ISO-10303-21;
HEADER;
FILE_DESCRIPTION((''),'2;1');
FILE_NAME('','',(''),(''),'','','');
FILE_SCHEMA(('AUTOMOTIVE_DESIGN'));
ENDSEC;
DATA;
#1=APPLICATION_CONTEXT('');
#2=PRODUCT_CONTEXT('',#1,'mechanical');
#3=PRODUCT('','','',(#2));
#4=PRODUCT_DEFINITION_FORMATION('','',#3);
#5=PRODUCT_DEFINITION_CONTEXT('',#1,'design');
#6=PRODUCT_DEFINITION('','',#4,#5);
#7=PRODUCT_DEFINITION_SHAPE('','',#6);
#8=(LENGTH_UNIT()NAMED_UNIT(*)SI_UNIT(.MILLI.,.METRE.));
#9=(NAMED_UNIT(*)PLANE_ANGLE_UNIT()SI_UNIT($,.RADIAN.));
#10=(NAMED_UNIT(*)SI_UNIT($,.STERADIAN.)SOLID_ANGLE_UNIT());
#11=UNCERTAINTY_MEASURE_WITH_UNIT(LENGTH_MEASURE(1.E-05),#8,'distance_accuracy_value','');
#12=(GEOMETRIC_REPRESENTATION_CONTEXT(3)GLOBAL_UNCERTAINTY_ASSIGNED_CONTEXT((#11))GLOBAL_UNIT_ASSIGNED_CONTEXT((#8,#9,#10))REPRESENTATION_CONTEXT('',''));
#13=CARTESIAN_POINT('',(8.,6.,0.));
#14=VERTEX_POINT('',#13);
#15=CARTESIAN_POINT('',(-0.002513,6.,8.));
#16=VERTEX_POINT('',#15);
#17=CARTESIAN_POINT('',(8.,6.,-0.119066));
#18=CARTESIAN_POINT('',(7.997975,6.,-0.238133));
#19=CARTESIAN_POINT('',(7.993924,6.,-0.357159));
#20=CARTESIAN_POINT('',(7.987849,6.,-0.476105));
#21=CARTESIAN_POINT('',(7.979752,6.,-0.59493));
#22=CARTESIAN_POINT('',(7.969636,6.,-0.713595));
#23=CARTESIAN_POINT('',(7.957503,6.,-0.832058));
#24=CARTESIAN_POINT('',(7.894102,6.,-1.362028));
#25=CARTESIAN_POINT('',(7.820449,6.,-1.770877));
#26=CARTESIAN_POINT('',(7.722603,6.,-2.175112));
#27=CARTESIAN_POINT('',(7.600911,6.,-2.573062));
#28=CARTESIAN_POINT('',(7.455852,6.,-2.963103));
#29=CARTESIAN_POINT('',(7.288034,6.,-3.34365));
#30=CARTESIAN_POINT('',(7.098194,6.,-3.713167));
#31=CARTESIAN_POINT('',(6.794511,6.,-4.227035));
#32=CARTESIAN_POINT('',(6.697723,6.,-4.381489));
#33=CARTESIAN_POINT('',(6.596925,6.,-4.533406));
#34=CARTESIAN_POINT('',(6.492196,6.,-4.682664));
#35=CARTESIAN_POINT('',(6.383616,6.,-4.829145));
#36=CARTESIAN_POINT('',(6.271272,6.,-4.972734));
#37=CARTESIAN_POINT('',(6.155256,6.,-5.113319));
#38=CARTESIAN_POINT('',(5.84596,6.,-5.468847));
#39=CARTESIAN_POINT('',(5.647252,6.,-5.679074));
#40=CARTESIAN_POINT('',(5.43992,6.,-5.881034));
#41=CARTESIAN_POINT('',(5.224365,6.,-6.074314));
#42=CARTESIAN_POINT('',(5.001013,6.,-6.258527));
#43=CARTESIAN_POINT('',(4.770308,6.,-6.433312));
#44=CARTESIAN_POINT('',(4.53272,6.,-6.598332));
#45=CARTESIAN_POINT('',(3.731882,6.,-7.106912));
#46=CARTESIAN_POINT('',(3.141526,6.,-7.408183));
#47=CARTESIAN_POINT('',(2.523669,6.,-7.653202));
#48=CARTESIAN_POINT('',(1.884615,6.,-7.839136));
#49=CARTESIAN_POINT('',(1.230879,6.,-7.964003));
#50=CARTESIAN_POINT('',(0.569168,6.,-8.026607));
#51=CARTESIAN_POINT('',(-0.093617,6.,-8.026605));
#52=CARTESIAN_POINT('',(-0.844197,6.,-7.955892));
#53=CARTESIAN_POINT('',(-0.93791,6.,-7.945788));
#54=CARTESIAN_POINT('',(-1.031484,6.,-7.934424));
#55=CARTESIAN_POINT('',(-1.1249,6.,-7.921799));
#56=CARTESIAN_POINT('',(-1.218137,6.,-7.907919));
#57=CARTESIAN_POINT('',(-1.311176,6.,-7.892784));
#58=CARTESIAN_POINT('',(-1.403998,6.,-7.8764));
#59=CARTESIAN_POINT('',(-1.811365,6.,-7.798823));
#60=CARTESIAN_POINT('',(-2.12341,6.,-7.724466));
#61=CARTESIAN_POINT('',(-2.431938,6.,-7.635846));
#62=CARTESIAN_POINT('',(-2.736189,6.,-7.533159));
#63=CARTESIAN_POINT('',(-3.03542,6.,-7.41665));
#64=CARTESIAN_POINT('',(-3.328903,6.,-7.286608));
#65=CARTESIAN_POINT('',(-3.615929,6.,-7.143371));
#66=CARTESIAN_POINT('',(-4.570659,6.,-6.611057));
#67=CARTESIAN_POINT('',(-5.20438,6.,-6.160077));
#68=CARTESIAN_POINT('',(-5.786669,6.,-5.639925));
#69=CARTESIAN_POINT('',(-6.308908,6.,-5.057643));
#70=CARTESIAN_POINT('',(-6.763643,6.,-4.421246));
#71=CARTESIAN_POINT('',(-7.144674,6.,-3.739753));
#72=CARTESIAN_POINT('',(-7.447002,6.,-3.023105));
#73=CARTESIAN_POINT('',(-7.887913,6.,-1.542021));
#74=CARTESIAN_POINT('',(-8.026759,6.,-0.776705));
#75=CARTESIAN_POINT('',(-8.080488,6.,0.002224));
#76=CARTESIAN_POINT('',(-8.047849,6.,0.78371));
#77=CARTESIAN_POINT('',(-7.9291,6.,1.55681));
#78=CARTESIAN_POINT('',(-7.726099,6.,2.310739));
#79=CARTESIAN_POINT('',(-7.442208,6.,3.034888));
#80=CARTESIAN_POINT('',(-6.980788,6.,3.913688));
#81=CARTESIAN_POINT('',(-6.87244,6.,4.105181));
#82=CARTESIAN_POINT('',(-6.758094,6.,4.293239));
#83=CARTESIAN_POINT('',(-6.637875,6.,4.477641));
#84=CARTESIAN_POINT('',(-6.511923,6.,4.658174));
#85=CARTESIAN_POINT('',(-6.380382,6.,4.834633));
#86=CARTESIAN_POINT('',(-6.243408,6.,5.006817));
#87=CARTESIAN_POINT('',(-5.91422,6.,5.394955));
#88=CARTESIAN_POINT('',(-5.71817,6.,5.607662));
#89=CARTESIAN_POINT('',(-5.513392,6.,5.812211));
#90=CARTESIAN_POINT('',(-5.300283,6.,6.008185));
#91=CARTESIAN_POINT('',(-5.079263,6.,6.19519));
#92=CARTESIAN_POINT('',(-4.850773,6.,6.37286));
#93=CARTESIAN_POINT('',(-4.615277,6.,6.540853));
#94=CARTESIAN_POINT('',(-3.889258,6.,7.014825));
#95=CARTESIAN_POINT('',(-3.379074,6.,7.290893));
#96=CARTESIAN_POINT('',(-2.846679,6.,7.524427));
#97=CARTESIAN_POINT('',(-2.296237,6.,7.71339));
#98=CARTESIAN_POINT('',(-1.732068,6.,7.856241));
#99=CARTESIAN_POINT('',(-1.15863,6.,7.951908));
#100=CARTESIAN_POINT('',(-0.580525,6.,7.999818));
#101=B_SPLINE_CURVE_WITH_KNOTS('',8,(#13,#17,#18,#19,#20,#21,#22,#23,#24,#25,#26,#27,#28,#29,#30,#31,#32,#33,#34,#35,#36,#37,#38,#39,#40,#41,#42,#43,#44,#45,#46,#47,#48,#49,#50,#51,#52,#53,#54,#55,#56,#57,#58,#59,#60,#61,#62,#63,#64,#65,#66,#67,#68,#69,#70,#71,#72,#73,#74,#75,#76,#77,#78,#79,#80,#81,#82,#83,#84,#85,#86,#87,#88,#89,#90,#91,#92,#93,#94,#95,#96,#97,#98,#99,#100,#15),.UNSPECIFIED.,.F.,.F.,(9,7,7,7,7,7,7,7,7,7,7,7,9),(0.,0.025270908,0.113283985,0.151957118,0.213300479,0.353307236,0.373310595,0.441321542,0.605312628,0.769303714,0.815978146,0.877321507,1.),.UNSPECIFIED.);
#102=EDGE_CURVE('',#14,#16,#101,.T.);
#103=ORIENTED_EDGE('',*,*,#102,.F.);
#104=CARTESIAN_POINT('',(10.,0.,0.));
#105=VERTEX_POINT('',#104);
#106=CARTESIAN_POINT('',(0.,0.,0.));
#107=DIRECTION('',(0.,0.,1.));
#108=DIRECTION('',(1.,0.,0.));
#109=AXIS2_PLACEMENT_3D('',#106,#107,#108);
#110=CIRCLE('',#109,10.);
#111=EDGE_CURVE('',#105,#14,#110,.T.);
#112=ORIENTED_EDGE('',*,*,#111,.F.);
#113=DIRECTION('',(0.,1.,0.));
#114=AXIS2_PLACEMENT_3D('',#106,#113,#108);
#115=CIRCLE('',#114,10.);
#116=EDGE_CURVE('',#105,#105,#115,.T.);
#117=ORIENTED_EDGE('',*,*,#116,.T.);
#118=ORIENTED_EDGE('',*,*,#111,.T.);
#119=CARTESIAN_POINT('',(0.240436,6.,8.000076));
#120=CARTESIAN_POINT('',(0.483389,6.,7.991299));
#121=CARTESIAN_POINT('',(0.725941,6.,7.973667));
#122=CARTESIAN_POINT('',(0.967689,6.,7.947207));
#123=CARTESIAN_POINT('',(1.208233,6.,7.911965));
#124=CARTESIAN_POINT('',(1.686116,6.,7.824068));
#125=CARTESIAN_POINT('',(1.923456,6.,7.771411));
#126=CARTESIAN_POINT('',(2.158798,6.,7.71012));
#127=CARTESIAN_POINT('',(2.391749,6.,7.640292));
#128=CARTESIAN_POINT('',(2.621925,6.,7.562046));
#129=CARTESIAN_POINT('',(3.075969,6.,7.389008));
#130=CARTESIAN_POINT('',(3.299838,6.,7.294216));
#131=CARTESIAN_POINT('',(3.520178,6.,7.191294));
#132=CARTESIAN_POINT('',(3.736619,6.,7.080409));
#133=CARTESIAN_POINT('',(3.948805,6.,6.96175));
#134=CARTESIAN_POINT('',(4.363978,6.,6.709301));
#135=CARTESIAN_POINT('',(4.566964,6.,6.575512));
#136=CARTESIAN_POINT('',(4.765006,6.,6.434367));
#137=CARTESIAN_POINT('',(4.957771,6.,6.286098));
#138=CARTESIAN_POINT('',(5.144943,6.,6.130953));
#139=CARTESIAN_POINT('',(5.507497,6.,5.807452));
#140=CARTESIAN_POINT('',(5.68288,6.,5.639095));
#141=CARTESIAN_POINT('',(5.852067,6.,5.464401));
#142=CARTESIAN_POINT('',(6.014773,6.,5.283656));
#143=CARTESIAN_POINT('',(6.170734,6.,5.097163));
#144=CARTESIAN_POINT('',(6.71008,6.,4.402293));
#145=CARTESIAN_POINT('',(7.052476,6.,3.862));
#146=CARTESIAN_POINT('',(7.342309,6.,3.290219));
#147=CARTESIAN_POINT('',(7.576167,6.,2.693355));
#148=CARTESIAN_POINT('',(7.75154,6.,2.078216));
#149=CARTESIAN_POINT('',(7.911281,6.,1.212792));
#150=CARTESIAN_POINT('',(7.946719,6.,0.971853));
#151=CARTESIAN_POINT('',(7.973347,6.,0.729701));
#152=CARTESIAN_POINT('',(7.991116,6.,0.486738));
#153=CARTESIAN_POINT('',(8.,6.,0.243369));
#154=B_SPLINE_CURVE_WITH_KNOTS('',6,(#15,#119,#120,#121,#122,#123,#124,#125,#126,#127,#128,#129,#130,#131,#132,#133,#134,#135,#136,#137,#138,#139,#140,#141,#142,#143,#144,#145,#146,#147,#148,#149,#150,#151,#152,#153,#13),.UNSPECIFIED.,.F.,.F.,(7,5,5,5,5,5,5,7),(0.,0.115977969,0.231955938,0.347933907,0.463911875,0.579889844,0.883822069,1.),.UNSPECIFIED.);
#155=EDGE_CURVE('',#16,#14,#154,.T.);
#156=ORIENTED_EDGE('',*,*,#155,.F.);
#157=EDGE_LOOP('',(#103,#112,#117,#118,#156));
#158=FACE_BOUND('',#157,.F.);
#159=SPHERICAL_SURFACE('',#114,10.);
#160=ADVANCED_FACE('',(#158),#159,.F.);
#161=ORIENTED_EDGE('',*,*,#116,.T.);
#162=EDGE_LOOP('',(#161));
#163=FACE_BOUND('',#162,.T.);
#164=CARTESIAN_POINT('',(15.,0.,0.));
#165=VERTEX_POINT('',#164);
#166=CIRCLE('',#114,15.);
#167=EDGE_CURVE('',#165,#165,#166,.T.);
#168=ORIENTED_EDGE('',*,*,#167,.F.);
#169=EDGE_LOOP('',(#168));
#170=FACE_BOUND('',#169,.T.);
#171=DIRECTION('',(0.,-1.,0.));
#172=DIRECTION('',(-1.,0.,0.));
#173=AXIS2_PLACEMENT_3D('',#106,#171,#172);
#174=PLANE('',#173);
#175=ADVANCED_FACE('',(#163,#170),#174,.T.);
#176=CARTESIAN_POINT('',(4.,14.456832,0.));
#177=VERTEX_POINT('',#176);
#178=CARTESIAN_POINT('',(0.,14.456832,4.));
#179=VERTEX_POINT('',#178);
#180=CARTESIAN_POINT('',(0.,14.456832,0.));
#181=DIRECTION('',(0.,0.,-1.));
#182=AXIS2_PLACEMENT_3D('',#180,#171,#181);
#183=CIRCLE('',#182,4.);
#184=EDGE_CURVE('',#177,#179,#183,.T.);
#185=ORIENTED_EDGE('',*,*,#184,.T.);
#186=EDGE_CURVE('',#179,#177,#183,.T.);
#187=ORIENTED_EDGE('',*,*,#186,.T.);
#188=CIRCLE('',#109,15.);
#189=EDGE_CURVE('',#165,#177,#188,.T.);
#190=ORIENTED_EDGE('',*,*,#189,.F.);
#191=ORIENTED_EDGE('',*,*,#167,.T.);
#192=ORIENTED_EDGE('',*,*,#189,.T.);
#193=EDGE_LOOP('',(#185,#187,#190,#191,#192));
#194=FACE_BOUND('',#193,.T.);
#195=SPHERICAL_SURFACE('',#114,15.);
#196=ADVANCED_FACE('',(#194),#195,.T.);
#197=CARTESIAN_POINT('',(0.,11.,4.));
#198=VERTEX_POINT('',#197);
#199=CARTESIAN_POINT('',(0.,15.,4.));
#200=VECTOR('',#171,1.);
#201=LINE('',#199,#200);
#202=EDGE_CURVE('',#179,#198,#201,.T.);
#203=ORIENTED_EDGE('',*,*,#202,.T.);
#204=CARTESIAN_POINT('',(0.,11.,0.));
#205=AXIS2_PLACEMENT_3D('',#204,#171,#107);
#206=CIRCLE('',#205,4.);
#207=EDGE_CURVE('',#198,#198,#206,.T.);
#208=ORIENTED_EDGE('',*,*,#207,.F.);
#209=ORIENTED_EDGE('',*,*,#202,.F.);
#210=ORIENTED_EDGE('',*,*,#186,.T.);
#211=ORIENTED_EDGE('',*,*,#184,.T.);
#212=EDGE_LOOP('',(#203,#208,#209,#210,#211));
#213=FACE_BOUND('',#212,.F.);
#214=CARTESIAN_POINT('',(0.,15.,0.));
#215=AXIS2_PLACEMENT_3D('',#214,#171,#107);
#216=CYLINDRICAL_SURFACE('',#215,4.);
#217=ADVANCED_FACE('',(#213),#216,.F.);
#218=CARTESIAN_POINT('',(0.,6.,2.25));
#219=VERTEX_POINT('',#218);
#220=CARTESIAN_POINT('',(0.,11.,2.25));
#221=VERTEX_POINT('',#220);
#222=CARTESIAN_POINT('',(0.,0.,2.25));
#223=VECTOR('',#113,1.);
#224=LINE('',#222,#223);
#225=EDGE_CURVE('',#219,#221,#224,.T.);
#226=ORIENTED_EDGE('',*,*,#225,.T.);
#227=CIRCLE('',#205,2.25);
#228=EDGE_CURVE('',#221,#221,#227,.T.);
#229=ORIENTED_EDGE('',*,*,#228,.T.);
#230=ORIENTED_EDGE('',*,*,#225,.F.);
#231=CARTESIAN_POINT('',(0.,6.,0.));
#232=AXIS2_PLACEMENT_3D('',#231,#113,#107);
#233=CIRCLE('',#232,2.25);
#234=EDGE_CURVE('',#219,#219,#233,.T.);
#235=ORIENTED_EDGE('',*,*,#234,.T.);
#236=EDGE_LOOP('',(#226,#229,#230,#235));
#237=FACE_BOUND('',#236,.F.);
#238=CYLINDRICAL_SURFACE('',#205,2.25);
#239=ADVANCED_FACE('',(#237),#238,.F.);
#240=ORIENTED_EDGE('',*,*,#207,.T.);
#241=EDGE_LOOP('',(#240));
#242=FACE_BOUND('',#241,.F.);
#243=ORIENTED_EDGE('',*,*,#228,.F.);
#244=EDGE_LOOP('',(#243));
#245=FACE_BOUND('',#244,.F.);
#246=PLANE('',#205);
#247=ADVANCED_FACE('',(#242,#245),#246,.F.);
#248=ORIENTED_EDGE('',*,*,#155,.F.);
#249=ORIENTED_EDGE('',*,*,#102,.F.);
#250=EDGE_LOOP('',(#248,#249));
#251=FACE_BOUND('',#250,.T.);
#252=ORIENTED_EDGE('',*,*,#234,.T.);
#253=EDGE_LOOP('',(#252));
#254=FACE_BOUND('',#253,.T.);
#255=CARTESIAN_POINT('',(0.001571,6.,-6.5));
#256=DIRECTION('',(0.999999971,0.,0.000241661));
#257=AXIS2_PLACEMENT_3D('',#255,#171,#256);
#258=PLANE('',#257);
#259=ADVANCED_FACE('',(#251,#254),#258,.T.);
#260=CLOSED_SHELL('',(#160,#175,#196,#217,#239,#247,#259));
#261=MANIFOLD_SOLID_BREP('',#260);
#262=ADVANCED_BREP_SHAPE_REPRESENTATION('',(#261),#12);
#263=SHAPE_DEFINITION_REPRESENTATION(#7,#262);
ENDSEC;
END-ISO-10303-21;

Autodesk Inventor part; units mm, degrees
ref_plane "YZ Plane" through (0, 0, 0) normal (1, 0, 0) x (0, 1, 0)
ref_plane "XY Plane" through (0, 0, 0) normal (0, 0, 1) x (1, 0, 0)
sketch "Sketch1" plane through (0, 0, 0) normal (0, 0, 1) x (1, 0, 0)
  line L0 (0, 0) -> (0, 15)
  line L1 (0, 0) -> (15, 0)
  arc A0 (15, 0) -> (0, 15) centre (0, 0) ccw
  line L2 (0, -3.6213) -> (0, 21.7279) projected
  dimension "d2" = 15
revolve "Revolution1" add sketch "Sketch1" angle 360 about axis through (0, -10, 0) along (0, 1, 0)
ref_plane "Work Plane1" through (0, 15, 0) normal (0, 1, 0) x (-1, 0, 0)
sketch "Sketch2" plane through (0, 15, 0) normal (0, 1, 0) x (-1, 0, 0)
  point P0 (0, 0)
  point P1 (0, 0)
hole "Hole1" at (0, 15, 0) direction (0, -1, 0) diameter 4.5 end through all counterbore diameter 8 counterbore depth 4 clearance for "Socket Head Cap Screw" size "M4" standard "Ansi Metric M Profile"
shell "Shell1" thickness 5 removed faces 1 at (10.5992, 0, 1.287)
sketch "Sketch3" plane through (0, 0, 0) normal (0, -1, 0) x (1, 0, 0)
  circle A0 centre (0, 0) radius 7.25 projected
  circle A1 centre (0, 0) radius 2.25 projected
extrude "Extrusion1" cut sketch "Sketch3" against normal blind 6
properties part number "Ball_Upper Half" material "Nylon 6/6"
